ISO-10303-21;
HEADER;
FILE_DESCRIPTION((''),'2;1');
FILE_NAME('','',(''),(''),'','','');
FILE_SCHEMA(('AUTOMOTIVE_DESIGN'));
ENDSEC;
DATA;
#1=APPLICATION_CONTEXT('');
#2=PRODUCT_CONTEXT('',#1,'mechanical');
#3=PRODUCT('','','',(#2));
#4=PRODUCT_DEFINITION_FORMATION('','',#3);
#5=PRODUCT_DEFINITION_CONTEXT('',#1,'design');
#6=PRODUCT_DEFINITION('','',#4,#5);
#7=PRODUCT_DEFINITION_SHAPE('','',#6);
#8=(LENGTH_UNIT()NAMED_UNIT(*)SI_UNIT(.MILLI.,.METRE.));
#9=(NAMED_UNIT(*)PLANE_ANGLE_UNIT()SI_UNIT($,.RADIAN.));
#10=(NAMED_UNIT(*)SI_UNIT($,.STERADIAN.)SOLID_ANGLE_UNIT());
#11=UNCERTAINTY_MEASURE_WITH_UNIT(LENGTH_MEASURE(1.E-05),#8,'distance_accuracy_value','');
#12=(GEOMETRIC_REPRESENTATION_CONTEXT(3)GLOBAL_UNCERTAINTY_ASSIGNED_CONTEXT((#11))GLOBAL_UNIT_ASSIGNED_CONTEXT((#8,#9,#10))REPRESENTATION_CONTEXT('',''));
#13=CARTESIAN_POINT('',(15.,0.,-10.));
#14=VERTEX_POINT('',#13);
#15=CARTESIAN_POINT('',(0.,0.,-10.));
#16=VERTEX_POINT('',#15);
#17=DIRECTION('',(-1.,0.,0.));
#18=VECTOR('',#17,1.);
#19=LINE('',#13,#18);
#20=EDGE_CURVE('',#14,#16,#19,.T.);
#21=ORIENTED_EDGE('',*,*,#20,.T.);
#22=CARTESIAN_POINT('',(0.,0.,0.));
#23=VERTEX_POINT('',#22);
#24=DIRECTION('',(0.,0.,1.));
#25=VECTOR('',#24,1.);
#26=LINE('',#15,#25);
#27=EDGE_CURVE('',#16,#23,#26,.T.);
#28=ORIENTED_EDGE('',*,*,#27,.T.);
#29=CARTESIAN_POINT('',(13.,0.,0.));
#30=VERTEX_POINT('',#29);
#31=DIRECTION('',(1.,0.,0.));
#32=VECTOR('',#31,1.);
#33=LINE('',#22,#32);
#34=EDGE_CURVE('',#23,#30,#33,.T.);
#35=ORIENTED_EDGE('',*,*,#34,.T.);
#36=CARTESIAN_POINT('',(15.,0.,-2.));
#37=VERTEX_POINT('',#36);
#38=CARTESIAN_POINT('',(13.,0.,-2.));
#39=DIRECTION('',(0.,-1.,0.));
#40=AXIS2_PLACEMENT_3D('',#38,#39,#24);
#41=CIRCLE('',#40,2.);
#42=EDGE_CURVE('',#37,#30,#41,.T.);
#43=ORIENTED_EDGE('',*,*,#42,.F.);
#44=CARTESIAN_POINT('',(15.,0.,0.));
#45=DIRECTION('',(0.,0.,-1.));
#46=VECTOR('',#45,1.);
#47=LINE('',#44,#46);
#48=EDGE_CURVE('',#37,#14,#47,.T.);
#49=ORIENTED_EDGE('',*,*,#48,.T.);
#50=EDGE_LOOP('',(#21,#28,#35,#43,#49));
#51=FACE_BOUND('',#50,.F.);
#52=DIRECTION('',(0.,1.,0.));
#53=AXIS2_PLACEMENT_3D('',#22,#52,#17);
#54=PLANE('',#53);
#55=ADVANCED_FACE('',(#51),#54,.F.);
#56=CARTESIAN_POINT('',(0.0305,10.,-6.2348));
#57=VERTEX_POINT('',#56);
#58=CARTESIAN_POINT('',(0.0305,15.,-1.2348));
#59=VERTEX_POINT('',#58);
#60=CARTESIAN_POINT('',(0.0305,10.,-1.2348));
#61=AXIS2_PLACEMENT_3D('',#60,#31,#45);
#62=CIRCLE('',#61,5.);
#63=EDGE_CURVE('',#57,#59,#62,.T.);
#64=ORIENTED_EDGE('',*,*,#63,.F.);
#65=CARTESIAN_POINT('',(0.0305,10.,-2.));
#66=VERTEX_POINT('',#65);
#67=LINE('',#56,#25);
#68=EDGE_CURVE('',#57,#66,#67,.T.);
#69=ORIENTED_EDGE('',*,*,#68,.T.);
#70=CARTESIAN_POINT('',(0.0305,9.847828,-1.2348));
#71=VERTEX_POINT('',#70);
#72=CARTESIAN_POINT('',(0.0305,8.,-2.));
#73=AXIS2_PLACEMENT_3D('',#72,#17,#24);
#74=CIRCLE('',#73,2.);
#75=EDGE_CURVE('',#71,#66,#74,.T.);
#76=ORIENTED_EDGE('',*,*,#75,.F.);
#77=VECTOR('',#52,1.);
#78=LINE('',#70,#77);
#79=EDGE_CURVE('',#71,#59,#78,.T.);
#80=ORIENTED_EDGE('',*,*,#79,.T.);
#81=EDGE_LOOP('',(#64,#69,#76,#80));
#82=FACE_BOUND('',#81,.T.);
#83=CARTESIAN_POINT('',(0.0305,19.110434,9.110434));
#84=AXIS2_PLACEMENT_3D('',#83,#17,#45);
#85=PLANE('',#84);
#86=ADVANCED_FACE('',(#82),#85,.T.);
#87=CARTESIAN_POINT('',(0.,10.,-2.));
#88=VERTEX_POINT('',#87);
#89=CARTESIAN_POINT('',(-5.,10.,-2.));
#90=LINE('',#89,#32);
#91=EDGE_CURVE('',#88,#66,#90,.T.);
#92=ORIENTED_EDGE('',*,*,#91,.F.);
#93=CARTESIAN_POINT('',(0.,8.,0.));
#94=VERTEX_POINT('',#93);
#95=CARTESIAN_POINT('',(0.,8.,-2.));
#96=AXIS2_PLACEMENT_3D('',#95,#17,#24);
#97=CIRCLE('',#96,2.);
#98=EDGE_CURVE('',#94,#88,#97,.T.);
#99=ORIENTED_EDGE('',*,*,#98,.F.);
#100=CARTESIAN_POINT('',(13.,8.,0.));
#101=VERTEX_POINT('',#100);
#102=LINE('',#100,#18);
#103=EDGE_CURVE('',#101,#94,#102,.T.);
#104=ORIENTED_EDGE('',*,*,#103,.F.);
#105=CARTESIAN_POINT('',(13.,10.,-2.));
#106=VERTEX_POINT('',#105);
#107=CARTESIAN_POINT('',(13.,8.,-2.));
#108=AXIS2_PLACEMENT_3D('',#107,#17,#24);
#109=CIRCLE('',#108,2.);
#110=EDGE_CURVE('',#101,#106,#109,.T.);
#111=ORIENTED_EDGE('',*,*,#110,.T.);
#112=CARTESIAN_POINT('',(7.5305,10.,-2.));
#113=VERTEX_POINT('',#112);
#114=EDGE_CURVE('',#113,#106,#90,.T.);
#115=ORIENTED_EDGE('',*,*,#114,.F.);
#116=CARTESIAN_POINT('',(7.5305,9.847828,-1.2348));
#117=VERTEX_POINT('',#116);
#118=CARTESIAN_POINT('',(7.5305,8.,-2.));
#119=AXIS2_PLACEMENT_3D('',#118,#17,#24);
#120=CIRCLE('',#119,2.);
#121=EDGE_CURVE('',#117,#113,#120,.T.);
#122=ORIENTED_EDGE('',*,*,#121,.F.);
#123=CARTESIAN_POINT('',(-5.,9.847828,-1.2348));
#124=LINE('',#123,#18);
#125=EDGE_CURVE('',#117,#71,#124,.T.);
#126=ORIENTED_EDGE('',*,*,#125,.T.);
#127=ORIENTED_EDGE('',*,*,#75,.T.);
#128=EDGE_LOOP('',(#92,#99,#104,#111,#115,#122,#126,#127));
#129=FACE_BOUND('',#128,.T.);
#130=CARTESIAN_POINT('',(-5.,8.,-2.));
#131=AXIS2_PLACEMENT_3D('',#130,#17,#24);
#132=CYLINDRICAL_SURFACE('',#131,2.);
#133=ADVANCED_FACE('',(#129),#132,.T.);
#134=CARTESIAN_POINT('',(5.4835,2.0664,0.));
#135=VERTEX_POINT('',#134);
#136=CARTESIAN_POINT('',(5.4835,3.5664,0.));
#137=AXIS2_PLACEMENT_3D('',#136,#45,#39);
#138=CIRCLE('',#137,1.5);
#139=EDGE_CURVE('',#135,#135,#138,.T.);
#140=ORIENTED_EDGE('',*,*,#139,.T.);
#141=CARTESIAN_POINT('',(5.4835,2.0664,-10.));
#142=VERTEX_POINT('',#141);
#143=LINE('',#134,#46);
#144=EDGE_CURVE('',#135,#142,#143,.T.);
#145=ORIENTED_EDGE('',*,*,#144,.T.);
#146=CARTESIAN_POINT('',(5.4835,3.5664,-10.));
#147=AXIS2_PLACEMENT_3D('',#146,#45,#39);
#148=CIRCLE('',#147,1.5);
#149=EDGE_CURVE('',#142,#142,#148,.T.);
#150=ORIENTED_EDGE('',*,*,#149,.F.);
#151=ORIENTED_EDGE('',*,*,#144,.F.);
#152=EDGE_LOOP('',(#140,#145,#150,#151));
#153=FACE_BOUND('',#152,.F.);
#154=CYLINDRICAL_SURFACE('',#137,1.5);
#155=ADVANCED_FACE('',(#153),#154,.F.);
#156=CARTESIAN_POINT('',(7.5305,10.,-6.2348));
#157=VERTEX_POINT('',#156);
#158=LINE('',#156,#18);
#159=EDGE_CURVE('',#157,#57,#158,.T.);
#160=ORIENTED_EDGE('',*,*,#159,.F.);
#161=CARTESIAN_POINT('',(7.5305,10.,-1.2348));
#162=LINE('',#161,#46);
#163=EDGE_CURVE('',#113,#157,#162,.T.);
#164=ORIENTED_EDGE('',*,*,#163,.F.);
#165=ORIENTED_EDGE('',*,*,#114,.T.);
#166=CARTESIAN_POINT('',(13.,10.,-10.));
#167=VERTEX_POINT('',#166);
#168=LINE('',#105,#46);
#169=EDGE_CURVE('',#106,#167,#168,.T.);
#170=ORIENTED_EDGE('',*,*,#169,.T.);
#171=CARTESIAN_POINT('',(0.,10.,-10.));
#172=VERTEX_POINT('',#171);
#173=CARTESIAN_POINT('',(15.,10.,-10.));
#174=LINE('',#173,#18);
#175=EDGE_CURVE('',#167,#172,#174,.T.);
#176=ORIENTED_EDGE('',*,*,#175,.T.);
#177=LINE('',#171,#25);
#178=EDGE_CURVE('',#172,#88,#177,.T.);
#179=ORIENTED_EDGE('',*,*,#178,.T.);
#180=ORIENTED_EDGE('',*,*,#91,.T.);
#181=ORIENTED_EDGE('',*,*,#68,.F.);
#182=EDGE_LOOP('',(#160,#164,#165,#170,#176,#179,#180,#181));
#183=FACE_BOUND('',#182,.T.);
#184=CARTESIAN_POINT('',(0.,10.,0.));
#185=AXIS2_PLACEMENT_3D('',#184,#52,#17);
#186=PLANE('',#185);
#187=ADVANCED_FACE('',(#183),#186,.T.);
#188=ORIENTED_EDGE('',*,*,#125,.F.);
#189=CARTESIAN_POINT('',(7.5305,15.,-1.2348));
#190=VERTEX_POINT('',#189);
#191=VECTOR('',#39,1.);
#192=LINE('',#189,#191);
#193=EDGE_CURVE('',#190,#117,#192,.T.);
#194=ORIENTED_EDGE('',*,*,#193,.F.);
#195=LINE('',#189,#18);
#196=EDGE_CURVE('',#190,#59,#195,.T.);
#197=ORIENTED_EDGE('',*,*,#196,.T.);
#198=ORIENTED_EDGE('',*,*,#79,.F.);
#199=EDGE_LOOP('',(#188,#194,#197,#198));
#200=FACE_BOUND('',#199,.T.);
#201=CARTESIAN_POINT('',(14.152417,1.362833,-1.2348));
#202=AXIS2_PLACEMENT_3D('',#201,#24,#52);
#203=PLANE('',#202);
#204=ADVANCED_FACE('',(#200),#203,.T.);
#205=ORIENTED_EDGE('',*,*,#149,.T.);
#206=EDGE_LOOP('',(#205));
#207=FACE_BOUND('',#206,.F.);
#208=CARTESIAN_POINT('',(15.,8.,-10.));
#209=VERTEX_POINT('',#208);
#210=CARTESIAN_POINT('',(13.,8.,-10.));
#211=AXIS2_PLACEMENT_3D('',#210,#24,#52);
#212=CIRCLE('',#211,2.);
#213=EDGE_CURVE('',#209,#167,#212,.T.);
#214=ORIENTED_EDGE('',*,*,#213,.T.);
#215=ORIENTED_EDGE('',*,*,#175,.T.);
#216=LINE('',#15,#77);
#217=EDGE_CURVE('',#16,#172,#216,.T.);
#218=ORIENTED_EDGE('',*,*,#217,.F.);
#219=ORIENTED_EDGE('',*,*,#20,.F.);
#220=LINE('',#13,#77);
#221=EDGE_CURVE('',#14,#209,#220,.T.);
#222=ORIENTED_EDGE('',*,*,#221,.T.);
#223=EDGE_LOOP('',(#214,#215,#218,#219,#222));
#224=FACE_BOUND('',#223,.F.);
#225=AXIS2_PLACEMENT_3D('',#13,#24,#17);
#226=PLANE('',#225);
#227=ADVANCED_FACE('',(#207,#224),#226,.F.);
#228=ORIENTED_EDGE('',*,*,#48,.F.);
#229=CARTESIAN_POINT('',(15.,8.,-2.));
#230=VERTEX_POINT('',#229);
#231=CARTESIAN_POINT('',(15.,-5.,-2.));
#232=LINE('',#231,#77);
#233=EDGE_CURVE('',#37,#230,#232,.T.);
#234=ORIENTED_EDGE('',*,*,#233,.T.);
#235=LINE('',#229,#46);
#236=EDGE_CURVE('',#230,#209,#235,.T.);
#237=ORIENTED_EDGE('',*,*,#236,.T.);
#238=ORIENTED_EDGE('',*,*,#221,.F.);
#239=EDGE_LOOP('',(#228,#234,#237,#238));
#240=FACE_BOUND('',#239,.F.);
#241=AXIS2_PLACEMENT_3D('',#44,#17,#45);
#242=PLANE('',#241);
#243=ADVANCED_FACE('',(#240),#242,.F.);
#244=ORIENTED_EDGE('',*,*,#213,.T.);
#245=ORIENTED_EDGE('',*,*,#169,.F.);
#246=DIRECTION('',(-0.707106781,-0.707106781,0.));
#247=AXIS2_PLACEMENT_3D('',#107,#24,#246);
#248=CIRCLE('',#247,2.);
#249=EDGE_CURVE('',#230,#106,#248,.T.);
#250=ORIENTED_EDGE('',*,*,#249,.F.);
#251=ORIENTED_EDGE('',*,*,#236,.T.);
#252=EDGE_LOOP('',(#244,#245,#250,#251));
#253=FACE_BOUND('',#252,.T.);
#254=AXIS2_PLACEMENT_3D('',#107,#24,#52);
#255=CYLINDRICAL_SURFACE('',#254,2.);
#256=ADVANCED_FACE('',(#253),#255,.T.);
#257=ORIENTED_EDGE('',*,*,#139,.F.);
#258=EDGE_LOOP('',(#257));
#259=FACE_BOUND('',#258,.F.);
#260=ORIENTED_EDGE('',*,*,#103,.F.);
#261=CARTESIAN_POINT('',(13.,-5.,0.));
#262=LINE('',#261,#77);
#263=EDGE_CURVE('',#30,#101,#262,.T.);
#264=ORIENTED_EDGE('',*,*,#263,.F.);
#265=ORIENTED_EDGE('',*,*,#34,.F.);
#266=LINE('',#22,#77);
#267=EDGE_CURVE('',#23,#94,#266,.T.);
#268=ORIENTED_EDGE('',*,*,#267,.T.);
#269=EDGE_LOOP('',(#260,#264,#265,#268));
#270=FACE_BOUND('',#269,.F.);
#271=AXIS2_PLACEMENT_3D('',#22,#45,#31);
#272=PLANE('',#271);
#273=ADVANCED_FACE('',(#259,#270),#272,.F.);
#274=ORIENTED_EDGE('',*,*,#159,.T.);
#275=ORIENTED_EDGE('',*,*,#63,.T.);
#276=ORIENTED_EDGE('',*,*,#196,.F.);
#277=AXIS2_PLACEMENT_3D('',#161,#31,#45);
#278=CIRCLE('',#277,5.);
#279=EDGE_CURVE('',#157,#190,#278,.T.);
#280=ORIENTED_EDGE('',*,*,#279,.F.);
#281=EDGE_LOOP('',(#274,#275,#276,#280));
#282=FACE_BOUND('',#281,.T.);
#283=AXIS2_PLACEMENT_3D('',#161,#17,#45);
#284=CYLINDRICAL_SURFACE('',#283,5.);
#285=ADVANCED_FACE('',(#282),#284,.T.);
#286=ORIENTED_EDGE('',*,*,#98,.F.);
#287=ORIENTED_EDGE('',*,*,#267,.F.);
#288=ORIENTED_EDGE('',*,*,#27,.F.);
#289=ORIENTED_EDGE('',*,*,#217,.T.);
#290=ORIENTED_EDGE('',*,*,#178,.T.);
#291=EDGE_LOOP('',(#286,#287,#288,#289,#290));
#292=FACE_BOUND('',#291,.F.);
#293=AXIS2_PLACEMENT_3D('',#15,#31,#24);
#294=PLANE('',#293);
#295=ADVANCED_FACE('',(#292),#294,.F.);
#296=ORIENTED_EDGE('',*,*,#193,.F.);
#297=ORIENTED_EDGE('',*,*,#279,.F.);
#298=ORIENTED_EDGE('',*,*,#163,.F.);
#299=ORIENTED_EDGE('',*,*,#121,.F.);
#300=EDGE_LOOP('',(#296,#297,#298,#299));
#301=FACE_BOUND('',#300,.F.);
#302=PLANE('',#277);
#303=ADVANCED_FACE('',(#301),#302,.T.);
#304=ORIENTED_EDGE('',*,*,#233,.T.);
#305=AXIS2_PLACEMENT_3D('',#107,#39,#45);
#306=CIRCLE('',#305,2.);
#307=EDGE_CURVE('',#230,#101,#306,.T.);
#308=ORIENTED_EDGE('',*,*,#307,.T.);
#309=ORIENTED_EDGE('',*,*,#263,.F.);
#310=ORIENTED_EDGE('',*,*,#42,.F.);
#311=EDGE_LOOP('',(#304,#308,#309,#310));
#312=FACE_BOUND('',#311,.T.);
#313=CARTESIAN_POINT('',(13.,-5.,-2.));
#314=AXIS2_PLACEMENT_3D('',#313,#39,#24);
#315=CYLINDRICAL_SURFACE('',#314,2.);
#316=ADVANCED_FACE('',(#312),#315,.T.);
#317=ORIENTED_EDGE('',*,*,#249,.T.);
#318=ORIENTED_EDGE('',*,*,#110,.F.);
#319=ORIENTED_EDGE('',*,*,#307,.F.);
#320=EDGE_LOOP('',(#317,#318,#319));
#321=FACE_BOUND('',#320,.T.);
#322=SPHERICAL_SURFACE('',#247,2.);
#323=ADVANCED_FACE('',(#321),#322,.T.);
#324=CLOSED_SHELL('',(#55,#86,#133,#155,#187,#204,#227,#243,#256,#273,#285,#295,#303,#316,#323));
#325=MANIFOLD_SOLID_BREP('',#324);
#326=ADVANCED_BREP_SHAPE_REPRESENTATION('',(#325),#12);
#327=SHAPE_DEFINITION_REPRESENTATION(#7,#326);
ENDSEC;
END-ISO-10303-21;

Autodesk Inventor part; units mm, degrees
ref_plane "YZ Plane" through (0, 0, 0) normal (1, 0, 0) x (0, 1, 0)
ref_plane "XZ Plane" through (0, 0, 0) normal (0, 1, 0) x (-1, 0, 0)
ref_plane "XY Plane" through (0, 0, 0) normal (0, 0, 1) x (1, 0, 0)
sketch "Sketch1" plane through (0, 0, 0) normal (0, 1, 0) x (-1, 0, 0)
  line L0 (0, 0) -> (-15, 0)
  line L1 (-15, 0) -> (-15, -10)
  line L2 (-15, -10) -> (0, -10)
  line L3 (0, -10) -> (0, 0)
  dimension "d0" = 10
  dimension "d1" = 15
extrude "Extrusion1" add sketch "Sketch1" along normal blind 10
sketch "Sketch2" plane through (0, 10, 0) normal (0, 1, 0) x (1, 0, 0)
  line L0 (0.0305, 1.2348) -> (7.5305, 1.2348)
  line L1 (7.5305, 1.2348) -> (7.5305, 6.2348)
  line L2 (7.5305, 6.2348) -> (0.0305, 6.2348)
  line L3 (0.0305, 6.2348) -> (0.0305, 1.2348)
  point P0 (0, 0)
  dimension "d4" = 5
  dimension "d5" = 7.5
revolve "Revolution1" add sketch "Sketch2" angle 90 about axis through (0.0305, 10, -1.2348) along (1, 0, 0)
fillet "Fillet1" radius 2 3 edges at (7.5, 10, 0) (15, 10, -5) (15, 5, 0)
sketch "Sketch3" plane through (0, 0, 0) normal (0, 0, 1) x (1, 0, 0)
  point P0 (0, 0)
  point P1 (5.4835, 3.5664)
hole "Hole1" at (5.4835, 3.5664, 0) direction (0, 0, -1) diameter 3 end through all
properties part number "TEAM4788-001-Test-Part"
